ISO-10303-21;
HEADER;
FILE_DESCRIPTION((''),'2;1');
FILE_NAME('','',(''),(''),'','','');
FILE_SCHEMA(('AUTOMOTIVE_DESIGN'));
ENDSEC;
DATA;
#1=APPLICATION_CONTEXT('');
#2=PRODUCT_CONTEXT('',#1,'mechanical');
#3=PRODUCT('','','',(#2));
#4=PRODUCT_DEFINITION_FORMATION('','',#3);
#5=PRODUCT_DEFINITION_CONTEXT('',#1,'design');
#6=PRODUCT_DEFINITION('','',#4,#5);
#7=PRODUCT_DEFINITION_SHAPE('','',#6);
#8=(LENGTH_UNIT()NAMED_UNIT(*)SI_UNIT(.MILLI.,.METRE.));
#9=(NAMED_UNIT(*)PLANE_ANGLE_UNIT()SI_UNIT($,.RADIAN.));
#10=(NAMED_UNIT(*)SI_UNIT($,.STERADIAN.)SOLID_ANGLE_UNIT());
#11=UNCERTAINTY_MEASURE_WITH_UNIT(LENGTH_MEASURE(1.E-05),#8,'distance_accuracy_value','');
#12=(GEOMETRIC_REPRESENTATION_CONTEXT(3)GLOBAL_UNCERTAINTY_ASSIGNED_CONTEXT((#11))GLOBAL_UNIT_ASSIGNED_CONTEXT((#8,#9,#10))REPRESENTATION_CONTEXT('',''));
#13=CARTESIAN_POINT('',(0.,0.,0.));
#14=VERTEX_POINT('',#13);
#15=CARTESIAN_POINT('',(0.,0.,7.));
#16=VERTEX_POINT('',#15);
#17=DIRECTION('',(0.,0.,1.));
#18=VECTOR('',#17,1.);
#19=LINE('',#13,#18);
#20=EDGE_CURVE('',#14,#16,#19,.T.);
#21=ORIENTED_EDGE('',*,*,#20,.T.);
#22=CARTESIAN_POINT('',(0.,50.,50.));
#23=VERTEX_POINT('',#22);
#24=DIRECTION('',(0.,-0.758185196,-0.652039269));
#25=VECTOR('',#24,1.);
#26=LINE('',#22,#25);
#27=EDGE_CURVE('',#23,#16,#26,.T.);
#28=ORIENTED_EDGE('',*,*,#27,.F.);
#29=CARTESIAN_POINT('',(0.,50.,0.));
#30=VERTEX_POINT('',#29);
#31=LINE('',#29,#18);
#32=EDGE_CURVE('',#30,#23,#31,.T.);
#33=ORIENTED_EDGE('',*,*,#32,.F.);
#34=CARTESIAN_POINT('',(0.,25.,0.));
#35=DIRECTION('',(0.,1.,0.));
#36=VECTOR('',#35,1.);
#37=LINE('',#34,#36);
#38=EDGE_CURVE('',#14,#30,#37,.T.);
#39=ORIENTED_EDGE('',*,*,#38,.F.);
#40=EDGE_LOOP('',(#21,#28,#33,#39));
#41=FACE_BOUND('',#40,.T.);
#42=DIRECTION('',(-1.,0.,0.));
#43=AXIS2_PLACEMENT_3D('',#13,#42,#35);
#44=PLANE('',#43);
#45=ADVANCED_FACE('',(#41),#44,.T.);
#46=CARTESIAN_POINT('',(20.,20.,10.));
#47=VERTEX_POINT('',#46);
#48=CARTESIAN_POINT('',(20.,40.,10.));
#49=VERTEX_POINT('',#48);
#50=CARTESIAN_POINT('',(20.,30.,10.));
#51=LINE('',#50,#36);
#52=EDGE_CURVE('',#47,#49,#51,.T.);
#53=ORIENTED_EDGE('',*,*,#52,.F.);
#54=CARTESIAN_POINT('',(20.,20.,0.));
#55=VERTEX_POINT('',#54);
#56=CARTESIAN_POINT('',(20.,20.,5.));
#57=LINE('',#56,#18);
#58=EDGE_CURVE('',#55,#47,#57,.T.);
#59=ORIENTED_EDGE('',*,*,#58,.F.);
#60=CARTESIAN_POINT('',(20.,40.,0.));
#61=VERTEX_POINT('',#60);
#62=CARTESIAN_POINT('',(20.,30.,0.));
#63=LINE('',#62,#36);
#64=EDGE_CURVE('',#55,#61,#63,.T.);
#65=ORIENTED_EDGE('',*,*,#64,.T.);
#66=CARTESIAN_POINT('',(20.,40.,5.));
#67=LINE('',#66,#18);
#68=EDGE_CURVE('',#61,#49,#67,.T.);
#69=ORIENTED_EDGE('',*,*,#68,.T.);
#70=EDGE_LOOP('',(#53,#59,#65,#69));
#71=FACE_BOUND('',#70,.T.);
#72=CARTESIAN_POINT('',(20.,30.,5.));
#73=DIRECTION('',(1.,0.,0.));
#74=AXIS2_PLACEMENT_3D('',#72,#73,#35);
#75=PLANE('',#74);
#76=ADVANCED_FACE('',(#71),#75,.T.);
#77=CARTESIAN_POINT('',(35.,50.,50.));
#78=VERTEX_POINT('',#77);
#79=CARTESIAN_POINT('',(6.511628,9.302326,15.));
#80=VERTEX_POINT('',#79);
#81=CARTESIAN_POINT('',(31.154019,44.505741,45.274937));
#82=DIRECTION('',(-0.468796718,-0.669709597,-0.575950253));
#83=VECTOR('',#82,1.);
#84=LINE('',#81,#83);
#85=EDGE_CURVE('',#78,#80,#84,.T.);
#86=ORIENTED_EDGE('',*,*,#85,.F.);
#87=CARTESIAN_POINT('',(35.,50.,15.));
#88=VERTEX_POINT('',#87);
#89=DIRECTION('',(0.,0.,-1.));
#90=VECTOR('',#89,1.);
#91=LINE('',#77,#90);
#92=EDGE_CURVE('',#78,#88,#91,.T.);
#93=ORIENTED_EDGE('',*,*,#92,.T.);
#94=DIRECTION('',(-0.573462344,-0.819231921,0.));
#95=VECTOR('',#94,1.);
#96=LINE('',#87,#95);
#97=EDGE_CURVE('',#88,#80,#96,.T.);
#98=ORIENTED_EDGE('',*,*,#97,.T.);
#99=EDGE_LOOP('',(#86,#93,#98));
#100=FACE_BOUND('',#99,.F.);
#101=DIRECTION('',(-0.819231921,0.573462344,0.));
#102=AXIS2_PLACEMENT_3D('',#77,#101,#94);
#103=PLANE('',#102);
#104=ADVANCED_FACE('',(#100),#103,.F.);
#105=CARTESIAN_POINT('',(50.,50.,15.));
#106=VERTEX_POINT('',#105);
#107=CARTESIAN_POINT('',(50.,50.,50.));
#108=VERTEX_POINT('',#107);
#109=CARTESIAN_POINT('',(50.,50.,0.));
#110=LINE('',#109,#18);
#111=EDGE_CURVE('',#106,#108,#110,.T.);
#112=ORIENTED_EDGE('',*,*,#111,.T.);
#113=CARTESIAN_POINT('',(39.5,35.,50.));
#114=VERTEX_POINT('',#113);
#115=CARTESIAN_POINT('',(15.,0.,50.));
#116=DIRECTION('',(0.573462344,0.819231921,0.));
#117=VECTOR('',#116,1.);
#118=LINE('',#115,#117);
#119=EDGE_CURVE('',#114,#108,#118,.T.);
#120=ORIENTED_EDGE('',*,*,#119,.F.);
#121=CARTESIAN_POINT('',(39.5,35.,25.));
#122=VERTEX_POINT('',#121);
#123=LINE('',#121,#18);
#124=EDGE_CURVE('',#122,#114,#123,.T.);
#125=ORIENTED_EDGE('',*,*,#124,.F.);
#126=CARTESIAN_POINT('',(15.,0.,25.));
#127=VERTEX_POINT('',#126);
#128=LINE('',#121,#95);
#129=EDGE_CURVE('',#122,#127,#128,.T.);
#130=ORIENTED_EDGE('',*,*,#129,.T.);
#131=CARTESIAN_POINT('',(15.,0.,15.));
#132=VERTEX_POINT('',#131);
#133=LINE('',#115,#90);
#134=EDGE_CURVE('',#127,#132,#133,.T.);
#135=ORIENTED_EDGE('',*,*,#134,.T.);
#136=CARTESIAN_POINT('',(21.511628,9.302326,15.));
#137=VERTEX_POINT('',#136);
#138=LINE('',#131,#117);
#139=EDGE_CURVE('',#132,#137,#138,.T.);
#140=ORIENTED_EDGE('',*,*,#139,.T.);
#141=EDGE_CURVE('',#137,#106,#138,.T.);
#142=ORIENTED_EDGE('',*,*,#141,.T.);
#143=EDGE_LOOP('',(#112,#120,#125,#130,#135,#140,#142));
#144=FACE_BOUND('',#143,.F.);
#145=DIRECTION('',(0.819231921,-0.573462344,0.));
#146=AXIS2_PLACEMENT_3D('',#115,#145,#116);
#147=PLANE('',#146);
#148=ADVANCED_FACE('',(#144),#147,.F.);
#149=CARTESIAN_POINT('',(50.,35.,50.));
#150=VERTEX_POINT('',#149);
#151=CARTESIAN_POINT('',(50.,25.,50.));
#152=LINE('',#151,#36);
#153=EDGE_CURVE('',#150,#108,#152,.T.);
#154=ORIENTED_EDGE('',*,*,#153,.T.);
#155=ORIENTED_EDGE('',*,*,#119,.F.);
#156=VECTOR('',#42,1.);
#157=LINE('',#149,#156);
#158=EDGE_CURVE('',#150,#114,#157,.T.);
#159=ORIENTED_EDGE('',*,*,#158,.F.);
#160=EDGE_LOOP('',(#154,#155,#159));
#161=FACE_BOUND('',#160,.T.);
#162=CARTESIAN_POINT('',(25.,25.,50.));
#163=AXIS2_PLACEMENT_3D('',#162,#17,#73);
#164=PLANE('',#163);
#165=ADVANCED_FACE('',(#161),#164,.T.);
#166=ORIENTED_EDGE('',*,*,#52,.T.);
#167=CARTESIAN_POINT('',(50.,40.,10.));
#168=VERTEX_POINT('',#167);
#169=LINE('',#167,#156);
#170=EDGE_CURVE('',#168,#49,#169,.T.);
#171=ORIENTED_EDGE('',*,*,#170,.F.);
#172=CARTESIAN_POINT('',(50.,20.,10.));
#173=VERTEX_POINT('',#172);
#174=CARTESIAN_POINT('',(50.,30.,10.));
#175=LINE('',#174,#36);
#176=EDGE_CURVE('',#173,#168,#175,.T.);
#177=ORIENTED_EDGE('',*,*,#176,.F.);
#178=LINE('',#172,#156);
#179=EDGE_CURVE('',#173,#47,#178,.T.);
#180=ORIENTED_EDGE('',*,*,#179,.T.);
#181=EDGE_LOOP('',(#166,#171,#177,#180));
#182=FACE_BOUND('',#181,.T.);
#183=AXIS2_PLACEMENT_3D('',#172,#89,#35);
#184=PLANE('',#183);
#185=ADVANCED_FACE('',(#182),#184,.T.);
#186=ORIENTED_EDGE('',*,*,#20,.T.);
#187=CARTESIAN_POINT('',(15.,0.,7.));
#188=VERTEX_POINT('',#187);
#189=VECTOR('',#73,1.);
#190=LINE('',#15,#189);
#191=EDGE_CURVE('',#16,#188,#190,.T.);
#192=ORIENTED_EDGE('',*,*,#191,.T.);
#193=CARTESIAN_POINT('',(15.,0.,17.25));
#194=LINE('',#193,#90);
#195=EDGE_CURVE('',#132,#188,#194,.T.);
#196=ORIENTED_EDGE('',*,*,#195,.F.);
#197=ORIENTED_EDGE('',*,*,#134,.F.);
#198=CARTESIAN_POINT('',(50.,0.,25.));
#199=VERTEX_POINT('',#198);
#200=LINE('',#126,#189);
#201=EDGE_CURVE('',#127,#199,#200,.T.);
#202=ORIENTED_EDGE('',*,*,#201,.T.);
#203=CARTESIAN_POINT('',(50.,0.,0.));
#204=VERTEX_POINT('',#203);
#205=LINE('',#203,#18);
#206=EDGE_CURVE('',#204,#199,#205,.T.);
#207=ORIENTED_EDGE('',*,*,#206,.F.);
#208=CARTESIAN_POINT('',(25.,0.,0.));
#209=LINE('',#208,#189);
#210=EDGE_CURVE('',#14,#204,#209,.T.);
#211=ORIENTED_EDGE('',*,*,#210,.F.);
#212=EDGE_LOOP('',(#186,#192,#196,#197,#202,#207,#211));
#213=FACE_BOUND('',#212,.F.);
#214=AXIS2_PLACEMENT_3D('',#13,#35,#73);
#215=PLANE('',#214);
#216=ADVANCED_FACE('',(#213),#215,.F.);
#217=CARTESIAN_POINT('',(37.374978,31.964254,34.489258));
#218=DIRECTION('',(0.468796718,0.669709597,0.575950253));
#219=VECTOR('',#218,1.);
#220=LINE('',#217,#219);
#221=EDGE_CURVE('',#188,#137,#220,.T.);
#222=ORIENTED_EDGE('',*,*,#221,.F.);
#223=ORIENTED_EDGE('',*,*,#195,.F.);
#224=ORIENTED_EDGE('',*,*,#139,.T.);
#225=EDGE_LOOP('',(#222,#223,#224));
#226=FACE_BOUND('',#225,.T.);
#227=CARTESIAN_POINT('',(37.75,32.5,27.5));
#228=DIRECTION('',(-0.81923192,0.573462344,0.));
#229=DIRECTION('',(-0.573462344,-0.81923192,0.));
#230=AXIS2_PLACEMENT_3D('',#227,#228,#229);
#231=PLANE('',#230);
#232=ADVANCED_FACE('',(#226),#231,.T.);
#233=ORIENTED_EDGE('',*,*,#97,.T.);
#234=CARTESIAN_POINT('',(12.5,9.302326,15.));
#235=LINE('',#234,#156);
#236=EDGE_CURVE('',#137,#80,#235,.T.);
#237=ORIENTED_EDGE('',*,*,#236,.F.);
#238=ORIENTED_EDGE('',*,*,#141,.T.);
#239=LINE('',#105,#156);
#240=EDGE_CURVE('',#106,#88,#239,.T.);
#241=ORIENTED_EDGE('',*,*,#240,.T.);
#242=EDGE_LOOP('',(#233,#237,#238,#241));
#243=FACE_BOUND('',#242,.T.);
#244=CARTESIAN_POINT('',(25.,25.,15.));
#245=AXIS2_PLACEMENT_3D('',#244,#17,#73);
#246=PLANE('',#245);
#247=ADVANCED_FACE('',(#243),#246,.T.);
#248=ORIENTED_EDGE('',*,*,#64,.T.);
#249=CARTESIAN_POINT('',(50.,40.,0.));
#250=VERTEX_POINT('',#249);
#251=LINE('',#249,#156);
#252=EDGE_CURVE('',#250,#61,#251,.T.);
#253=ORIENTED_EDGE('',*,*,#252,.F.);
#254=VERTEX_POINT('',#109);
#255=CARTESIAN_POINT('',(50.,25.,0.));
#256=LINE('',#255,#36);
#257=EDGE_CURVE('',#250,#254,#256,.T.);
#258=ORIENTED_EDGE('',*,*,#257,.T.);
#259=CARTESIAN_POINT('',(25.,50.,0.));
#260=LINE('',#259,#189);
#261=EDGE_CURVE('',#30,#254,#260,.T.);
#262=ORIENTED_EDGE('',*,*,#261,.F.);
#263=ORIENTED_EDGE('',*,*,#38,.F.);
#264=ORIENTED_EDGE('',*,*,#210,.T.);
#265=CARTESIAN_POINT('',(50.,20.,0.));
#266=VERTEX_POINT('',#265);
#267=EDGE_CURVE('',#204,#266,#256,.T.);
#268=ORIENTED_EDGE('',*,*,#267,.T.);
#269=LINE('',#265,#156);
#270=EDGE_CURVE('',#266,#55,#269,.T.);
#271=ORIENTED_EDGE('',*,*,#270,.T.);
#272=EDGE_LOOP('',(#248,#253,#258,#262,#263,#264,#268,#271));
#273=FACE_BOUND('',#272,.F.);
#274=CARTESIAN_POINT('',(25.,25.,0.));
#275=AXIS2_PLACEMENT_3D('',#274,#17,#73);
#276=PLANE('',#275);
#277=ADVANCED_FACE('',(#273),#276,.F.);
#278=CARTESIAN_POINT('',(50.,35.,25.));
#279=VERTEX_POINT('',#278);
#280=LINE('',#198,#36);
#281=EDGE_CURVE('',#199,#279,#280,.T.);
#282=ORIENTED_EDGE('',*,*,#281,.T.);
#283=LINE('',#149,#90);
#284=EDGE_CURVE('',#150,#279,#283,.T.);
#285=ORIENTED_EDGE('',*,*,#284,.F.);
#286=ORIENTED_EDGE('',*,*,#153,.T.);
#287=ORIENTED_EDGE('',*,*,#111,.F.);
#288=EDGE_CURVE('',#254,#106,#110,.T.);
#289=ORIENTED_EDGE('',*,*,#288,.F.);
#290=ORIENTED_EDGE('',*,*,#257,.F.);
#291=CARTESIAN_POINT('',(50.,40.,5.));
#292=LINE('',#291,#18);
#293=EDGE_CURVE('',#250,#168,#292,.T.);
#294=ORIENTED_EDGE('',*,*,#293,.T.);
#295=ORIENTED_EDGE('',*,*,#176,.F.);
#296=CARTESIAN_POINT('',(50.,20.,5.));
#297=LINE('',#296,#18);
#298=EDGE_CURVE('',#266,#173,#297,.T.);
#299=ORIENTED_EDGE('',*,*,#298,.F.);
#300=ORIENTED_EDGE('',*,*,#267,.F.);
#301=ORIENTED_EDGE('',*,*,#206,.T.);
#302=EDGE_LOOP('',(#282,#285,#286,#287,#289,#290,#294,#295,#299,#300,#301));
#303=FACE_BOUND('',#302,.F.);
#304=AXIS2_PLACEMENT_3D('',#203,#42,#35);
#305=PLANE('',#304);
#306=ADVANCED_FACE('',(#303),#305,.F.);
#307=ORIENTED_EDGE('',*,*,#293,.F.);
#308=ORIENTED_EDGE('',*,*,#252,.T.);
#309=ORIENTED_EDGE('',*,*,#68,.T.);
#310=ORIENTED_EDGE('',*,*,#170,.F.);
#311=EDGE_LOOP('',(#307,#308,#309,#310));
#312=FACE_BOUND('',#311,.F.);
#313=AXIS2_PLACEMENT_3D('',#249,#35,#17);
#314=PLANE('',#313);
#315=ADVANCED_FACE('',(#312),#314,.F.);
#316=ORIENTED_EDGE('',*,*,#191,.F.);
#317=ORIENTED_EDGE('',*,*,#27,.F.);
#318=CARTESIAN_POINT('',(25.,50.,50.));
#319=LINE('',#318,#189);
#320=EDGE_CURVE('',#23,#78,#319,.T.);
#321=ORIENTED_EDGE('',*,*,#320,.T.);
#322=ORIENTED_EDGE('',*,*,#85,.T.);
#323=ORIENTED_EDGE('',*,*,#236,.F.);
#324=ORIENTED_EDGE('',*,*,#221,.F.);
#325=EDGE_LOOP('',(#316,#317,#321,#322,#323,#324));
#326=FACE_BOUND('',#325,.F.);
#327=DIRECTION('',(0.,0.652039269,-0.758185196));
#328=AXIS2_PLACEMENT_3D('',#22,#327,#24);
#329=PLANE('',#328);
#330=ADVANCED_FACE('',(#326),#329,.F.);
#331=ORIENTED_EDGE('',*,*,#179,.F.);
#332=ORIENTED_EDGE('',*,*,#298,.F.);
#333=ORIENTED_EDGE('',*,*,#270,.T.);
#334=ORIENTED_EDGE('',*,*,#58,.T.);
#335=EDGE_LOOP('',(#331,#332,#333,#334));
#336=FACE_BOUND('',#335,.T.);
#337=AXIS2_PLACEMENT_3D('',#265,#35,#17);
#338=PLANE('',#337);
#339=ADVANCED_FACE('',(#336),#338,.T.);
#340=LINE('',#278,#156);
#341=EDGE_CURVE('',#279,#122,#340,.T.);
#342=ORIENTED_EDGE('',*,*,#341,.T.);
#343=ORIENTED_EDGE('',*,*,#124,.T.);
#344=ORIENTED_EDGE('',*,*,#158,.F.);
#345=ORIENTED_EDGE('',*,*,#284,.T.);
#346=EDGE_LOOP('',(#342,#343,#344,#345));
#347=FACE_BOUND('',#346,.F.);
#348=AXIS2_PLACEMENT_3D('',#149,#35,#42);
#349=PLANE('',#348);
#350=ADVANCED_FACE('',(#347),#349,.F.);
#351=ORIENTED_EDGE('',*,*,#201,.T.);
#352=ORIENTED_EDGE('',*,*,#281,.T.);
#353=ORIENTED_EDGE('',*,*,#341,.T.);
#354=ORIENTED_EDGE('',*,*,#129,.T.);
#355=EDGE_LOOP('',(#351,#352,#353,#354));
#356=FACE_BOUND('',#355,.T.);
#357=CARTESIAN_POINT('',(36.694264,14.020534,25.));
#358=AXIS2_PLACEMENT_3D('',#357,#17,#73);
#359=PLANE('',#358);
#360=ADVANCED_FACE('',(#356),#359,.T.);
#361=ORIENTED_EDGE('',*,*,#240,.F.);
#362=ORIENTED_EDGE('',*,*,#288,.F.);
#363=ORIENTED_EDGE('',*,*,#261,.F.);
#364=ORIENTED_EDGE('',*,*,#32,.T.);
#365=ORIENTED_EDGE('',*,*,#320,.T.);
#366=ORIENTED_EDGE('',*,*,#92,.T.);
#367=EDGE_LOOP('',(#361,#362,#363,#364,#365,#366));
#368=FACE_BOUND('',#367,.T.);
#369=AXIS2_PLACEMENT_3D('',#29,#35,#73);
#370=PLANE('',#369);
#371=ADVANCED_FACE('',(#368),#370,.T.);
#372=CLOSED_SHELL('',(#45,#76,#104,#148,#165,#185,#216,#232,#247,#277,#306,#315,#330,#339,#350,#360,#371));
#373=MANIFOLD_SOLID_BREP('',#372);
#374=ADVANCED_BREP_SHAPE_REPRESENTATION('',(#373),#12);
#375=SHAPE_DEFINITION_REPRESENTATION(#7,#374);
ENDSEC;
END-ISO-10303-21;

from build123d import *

# Parameters (mm, degrees)
F0_W     = 50
F0_H     = 50
F1_DEPTH = 50
F2_W     = 20
F2_H     = 10
F3_DEPTH = 30
F5_DEPTH = 25
F7_DEPTH = 35
F9_REACH = 115.9479483752


with BuildPart() as f1:
    # F0 (on Top) → F1 (new body)
    with BuildSketch(Plane.XY):
        with Locations((25, 25)):
            Rectangle(F0_W, F0_H)
    extrude(amount=F1_DEPTH)

    # F2 (on face) → F3 (cut)
    with BuildSketch(Plane.YZ.offset(50)):
        with Locations((30, 5)):
            Rectangle(F2_W, F2_H)
    extrude(amount=-F3_DEPTH, mode=Mode.SUBTRACT)

    # F4 (on face) → F5 (cut)
    with BuildSketch(Plane.XY.offset(50)):
        Polygon((50, 35), (39.5, 35), (15, 0), (50, 0), align=None)
    extrude(amount=-F5_DEPTH, mode=Mode.SUBTRACT)

    # F6 (on face) → F7 (cut)
    with BuildSketch(Plane.XY.offset(50)):
        Polygon((39.5, 35), (50, 50), (35, 50), (0, 0), (15, 0), align=None)
    extrude(amount=-F7_DEPTH, mode=Mode.SUBTRACT)

    f9_end = Plane(origin=(37.75, 32.5, 27.5), x_dir=(-0.5734623444, -0.8192319205, 0), z_dir=(-0.8192319205, 0.5734623444, 0))
    # F8 (on face) → F9 (cut, up to a plane its end follows)
    with BuildSketch(Plane(origin=(0, 0, 0), x_dir=(0, -1, 0), z_dir=(-1, 0, 0))):
        Polygon((-50, 50), (0, 7), (0, 15), (0, 50), align=None)
    f9_long = extrude(amount=-F9_REACH, mode=Mode.PRIVATE)
    add(split(f9_long, bisect_by=f9_end, keep=Keep.TOP, mode=Mode.PRIVATE), mode=Mode.SUBTRACT)


solid = f1.part
